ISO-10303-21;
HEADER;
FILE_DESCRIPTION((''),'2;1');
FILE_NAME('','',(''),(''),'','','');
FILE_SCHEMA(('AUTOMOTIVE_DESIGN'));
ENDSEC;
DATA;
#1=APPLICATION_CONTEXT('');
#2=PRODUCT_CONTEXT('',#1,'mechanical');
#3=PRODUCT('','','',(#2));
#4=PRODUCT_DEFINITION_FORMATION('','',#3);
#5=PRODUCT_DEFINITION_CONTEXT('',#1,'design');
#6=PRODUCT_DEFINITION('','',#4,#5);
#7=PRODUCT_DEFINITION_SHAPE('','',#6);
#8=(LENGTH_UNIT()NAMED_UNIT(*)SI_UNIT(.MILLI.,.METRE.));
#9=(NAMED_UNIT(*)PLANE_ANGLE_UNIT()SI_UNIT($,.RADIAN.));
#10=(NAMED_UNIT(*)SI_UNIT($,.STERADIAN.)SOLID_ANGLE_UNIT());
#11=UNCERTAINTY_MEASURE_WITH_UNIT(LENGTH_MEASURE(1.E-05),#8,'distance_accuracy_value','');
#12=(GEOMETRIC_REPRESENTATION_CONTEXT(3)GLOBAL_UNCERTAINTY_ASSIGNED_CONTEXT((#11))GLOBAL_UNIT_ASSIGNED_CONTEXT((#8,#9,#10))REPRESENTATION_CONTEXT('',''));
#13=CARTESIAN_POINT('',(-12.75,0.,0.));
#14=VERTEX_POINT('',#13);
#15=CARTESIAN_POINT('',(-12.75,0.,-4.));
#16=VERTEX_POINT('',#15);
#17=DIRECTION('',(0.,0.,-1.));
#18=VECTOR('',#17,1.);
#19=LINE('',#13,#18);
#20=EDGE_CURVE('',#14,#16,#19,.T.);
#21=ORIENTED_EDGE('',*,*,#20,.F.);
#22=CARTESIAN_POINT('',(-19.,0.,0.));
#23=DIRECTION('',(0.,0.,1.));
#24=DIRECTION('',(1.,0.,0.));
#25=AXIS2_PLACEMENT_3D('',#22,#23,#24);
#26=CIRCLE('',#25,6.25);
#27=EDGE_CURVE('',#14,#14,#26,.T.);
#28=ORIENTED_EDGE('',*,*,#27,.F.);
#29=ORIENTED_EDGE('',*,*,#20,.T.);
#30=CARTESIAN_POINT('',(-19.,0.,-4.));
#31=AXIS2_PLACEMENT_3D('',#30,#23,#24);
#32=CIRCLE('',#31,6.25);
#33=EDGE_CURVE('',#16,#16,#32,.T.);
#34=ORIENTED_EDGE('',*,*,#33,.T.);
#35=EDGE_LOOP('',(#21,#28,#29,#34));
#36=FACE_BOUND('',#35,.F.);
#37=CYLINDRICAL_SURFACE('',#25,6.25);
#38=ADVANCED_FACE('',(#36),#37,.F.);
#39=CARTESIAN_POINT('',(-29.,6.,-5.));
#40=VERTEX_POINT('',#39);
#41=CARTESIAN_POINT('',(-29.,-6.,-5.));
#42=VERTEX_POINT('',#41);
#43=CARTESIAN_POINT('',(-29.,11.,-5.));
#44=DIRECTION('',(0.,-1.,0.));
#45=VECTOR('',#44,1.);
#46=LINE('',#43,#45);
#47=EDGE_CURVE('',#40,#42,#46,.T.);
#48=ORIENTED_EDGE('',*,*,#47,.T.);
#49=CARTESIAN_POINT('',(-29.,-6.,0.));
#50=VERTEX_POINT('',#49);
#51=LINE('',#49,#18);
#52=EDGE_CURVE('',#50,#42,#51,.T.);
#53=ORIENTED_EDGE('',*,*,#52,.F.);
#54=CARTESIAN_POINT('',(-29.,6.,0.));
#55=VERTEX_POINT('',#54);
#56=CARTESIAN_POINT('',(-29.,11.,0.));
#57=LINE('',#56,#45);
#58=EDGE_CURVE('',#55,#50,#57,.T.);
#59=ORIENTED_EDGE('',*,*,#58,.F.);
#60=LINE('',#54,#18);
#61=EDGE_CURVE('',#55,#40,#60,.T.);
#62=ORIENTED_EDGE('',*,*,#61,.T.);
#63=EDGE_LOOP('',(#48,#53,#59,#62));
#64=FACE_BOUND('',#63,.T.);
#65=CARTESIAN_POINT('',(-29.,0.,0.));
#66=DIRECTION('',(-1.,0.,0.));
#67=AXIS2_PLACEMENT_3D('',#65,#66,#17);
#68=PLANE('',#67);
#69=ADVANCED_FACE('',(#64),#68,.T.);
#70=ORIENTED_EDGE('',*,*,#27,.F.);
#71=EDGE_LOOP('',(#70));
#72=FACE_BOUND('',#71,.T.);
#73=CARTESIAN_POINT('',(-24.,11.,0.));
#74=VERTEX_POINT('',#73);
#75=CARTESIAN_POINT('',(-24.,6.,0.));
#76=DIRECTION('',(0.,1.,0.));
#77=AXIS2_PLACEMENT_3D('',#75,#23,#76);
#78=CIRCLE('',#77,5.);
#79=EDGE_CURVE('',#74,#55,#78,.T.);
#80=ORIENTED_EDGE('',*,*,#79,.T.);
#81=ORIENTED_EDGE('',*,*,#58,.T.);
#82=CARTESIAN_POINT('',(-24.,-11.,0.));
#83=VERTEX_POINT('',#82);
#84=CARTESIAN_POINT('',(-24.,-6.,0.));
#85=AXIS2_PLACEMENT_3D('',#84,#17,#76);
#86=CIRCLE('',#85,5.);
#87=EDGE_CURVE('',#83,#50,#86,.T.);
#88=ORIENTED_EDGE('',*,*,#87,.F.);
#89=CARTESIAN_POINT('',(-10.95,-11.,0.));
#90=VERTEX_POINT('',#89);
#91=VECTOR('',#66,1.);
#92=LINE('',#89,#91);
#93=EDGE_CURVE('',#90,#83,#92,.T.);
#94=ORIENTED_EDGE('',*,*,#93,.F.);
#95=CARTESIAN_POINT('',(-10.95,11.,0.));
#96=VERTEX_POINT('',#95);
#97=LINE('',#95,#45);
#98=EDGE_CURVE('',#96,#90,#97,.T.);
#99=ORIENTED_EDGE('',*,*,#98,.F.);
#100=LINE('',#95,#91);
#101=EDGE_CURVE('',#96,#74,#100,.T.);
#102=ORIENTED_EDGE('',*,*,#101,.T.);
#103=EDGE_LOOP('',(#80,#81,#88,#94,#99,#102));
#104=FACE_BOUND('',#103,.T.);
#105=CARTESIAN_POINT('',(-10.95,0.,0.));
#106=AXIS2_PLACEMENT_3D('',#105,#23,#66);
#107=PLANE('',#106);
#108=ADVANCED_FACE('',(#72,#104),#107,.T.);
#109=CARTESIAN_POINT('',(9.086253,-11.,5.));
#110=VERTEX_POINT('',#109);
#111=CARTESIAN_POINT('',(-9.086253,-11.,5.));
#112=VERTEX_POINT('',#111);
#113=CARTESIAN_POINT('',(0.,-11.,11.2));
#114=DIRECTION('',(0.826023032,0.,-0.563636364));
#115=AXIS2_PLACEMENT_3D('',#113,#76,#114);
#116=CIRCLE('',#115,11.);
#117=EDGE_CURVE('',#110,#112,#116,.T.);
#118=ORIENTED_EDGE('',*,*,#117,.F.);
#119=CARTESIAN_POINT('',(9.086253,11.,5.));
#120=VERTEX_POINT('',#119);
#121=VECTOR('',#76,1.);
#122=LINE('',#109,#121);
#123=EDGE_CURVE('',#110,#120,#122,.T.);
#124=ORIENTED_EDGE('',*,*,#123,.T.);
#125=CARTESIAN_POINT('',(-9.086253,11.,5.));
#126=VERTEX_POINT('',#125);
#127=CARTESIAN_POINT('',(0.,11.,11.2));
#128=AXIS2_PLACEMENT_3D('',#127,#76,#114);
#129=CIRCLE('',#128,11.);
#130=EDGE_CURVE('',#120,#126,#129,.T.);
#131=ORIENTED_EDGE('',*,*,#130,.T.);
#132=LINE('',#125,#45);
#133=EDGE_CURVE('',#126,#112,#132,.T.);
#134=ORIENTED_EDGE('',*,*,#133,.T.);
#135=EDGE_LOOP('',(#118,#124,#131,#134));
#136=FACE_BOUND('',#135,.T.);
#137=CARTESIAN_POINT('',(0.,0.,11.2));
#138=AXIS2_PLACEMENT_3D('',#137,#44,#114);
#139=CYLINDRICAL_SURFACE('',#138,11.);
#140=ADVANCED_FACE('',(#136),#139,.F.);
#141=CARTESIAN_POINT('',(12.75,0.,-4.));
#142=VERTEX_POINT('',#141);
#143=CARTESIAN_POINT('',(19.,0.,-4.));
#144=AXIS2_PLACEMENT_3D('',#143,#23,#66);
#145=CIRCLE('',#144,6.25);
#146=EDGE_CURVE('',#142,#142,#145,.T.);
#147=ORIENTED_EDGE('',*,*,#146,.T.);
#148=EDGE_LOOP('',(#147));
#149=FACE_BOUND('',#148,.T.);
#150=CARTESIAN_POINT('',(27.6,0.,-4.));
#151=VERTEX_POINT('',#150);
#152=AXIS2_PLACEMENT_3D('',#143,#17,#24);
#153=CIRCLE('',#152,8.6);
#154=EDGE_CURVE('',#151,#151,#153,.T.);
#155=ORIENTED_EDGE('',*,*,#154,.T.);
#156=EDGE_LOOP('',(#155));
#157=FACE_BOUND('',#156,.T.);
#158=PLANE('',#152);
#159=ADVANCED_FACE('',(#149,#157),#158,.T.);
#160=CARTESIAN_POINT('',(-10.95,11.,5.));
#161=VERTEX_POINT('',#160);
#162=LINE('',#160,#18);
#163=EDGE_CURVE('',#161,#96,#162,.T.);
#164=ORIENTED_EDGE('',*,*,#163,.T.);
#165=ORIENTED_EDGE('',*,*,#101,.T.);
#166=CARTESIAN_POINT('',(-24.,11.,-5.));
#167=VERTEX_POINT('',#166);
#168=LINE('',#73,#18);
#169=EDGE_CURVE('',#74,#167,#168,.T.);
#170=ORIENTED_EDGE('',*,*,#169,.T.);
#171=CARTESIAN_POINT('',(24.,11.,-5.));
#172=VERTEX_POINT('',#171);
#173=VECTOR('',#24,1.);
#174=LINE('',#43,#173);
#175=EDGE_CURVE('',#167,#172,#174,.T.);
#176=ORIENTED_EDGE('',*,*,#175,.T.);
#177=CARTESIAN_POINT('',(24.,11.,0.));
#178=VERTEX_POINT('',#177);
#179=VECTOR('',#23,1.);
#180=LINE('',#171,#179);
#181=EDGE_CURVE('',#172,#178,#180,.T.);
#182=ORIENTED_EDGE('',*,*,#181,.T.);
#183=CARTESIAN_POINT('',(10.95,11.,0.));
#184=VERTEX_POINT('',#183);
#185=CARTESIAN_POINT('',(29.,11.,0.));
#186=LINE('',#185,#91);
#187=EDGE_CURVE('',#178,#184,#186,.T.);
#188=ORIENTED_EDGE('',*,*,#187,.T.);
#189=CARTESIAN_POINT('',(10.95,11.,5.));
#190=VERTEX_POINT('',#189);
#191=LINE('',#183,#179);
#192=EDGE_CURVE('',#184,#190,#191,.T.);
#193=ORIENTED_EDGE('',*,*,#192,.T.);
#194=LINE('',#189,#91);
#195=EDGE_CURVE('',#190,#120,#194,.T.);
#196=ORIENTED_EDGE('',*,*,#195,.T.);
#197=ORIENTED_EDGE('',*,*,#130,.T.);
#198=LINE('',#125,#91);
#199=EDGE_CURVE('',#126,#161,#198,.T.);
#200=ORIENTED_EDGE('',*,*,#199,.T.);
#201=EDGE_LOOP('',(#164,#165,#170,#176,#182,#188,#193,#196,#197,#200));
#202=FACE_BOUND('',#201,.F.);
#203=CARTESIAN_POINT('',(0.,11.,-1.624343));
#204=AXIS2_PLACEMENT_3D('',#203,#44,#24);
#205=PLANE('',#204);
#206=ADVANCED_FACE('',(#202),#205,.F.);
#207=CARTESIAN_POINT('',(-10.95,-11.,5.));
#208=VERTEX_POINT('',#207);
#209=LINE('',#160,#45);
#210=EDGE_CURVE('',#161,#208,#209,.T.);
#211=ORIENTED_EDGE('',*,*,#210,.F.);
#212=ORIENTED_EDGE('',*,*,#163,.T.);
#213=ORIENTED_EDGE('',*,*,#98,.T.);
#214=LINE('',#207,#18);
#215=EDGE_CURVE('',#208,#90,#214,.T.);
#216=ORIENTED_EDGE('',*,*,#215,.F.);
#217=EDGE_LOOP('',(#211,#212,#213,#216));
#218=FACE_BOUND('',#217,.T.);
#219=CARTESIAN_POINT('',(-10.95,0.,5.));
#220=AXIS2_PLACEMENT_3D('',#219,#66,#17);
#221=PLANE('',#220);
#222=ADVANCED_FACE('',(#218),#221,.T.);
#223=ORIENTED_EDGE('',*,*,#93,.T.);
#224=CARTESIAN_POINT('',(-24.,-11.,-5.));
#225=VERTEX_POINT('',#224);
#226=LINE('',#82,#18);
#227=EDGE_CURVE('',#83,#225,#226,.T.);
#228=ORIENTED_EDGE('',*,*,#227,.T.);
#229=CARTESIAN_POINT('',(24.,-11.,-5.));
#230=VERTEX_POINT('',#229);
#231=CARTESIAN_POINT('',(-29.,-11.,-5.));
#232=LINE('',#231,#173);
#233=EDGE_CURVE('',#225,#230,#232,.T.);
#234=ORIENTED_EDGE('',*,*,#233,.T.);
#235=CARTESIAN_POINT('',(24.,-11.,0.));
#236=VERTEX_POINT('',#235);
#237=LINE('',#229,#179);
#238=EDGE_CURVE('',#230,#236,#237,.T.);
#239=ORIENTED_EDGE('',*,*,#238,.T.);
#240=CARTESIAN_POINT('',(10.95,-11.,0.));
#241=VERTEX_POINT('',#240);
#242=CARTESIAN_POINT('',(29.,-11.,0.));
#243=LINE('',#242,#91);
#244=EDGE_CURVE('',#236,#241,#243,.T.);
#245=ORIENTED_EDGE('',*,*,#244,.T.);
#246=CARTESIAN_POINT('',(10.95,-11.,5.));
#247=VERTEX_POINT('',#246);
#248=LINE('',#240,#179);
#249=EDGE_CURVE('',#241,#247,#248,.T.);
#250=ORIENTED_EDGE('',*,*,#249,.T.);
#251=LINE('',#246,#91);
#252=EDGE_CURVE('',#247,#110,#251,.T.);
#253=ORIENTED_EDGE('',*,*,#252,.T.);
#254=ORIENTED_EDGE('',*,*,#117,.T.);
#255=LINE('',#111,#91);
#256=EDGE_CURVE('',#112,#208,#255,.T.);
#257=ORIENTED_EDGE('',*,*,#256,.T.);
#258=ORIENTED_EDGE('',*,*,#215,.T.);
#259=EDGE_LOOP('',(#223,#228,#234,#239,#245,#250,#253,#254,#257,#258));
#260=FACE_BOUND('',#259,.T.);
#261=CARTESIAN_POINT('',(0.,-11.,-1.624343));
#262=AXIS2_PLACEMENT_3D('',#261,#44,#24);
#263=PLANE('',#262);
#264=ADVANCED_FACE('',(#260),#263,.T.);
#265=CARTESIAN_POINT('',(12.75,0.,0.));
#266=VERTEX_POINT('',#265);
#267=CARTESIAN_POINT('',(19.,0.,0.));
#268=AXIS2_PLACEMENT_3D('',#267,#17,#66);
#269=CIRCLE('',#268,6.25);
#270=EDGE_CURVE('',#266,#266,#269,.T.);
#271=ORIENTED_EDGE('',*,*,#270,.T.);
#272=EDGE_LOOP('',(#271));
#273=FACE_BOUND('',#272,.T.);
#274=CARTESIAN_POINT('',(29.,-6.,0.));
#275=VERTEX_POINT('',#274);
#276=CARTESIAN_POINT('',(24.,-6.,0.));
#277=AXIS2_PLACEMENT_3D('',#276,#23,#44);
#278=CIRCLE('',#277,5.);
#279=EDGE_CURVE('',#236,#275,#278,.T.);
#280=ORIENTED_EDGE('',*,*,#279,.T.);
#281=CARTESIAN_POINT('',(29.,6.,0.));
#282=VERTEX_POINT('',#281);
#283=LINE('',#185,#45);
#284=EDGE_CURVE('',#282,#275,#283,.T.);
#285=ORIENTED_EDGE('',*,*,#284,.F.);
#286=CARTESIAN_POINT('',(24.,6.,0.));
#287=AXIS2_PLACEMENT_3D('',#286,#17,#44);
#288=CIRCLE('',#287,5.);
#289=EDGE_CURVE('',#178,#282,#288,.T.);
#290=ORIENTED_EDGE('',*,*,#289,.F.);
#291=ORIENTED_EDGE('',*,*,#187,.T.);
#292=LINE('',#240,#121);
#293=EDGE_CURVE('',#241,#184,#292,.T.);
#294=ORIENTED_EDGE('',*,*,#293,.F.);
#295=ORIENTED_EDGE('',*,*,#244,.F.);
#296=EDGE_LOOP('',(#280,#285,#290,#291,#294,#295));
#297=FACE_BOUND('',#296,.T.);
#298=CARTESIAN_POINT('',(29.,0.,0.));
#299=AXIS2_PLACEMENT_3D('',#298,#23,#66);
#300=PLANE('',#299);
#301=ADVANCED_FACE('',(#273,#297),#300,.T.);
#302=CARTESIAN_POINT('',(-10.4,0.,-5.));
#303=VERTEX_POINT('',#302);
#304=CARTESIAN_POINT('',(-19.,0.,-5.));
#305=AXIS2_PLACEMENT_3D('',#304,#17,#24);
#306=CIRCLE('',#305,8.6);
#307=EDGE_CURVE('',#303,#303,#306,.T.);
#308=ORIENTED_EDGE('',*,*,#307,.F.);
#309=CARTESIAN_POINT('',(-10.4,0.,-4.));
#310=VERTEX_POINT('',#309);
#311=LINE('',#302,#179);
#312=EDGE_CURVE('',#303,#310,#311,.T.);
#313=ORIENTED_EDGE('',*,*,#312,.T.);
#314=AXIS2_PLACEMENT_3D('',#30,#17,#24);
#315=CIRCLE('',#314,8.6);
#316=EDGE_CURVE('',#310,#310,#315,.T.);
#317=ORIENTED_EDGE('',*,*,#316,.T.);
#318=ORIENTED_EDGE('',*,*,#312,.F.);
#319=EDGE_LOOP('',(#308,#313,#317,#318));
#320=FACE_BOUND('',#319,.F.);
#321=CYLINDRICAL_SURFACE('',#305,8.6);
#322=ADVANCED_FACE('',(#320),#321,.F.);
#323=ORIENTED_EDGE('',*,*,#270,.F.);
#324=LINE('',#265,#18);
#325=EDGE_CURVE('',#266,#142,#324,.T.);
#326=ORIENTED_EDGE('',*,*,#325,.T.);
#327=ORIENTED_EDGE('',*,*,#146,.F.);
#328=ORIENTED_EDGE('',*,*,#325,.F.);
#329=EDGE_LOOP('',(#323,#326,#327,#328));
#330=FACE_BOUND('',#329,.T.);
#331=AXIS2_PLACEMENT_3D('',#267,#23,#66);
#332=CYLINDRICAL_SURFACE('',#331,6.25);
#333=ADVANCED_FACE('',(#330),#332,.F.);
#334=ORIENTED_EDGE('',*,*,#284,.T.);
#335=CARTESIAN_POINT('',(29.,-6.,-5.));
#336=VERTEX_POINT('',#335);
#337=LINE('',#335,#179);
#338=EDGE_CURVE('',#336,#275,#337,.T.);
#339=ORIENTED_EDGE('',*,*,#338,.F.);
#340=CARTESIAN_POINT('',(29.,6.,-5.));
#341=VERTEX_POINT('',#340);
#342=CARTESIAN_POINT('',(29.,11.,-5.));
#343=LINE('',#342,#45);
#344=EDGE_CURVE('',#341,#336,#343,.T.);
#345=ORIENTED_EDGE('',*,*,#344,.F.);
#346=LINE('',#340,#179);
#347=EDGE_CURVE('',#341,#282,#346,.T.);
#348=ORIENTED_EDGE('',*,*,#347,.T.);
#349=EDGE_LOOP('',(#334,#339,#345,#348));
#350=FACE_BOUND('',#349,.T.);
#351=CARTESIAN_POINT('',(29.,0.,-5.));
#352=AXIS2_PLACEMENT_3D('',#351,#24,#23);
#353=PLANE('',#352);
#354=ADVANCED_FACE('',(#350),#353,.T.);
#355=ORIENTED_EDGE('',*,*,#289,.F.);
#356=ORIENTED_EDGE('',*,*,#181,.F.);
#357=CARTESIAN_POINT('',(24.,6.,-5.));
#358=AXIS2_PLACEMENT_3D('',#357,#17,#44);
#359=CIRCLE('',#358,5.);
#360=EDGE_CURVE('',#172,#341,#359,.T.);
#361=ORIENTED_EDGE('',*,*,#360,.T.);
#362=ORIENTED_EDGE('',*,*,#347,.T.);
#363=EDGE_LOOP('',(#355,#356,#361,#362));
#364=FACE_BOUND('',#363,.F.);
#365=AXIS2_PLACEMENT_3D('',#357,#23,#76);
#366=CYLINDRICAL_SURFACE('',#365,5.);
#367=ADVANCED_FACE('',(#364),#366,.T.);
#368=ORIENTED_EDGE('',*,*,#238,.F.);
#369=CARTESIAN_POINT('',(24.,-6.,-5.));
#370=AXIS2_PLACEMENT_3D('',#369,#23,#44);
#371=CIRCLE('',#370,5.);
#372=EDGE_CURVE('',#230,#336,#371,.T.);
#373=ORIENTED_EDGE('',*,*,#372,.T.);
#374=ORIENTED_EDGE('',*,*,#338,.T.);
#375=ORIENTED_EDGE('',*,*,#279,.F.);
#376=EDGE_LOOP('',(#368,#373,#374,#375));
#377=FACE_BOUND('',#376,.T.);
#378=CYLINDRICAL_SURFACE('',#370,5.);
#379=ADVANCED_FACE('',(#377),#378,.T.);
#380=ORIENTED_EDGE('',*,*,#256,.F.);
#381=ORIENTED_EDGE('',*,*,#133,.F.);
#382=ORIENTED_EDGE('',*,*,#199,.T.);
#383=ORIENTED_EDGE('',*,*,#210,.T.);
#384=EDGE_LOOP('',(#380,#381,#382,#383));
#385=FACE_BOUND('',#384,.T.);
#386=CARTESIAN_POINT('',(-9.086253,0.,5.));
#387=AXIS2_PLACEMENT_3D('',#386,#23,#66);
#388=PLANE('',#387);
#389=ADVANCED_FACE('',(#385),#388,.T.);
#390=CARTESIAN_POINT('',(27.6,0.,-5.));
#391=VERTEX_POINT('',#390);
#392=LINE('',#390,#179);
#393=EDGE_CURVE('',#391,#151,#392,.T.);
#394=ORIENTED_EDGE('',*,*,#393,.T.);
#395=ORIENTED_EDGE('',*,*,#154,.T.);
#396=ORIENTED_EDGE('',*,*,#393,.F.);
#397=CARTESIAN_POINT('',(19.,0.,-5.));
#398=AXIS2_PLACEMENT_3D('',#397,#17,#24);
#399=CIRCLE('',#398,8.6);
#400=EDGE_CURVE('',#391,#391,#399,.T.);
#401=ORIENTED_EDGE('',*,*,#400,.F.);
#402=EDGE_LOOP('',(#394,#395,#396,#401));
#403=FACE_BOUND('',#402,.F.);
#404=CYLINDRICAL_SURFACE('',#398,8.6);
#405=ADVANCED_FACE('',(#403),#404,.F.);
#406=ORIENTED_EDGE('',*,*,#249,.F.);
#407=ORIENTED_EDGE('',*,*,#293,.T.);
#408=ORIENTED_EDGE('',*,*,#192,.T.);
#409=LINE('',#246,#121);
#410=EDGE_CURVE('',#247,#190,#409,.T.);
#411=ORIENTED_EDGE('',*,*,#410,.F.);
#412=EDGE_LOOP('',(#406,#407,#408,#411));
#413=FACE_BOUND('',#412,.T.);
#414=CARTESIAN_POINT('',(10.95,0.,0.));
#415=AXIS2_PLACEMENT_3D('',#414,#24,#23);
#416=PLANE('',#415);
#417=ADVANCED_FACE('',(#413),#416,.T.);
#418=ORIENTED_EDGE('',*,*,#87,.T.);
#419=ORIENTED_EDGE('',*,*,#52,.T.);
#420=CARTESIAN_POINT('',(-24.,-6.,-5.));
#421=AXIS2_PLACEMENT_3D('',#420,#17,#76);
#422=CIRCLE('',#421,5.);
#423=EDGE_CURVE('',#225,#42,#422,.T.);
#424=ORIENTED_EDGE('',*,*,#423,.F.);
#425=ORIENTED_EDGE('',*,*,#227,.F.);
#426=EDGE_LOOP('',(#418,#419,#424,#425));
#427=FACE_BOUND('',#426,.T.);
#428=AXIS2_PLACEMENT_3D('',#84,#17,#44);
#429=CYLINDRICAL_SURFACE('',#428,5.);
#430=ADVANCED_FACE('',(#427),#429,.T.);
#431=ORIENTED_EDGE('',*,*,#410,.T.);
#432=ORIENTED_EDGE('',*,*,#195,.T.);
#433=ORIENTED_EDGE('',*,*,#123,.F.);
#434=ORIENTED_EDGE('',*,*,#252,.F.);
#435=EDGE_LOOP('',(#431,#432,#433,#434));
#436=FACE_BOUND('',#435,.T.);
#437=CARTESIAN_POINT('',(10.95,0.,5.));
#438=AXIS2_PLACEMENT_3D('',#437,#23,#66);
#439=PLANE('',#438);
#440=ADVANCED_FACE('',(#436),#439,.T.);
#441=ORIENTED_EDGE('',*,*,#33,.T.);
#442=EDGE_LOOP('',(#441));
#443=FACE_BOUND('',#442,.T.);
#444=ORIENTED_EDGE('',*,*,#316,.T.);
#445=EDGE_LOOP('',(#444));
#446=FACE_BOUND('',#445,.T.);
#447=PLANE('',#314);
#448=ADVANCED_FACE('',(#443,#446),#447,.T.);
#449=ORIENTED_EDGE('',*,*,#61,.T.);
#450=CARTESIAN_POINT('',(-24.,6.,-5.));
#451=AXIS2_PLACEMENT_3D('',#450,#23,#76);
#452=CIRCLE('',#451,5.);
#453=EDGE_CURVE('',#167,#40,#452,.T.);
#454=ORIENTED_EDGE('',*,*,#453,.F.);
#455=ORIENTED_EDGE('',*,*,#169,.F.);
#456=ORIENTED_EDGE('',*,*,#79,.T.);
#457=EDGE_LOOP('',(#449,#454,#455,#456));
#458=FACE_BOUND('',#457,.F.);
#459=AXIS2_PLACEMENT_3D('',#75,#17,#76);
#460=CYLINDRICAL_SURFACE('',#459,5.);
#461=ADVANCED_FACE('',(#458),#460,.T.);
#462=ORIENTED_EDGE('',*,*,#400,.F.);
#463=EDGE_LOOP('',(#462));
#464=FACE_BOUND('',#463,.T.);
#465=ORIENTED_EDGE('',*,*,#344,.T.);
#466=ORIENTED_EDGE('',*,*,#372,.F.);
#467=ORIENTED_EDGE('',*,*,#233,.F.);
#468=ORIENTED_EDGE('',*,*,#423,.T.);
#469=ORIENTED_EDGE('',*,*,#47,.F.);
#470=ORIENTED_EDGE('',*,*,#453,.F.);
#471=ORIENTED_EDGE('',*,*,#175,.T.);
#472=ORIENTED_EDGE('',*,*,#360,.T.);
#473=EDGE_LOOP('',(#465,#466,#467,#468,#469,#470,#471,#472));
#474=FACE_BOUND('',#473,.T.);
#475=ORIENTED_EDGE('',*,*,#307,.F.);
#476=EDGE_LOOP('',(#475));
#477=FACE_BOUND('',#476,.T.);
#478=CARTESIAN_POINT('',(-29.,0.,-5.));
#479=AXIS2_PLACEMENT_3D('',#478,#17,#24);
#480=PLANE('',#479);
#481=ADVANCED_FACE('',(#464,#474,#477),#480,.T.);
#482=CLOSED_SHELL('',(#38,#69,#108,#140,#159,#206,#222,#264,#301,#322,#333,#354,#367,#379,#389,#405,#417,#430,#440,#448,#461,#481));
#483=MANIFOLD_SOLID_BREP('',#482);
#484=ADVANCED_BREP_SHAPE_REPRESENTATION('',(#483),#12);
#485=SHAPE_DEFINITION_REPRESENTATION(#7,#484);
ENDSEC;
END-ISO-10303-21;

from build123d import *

# Parameters (mm, degrees)
F2_DEPTH = 11
F3_R     = 6.25
F4_DEPTH = 5.001
F5_R     = 5
F6_R     = 8.6
F7_DEPTH = 1


# Not quite as in the source:
# - a pattern or mirror of a feature is missing from the dataset's text; its kind, count and spacing are read off the source's solid


with BuildPart() as f2:
    # F1 (on Front) → F2 (new body, symmetric)
    with BuildSketch(Plane.XZ):
        with BuildLine():
            ThreePointArc((9.0862533533, 5), (0, 0.2), (-9.0862533533, 5))
            Line((-9.0862533533, 5), (-10.95, 5))
            Line((-10.95, 5), (-10.95, 0))
            Line((-10.95, 0), (-29, 0))
            Line((-29, 0), (-29, -5))
            Line((-29, -5), (29, -5))
            Line((29, -5), (29, 0))
            Line((29, 0), (10.95, 0))
            Line((10.95, 0), (10.95, 5))
            Line((10.95, 5), (9.0862533533, 5))
        make_face()
    extrude(amount=F2_DEPTH, both=True)

    # F3 (on Top) → F4 (cut, through all)
    with BuildSketch(Plane.XY):
        with Locations((-19, 0)):
            Circle(F3_R)
    f4 = extrude(amount=-F4_DEPTH, mode=Mode.SUBTRACT)

    # F4_copies: F4 across plane
    add(f4.mirror(Plane(origin=(0, 0, 0), x_dir=(0, 0, 1), z_dir=(1, 0, 0))), mode=Mode.SUBTRACT)

    # F5
    f5_edges = [f2.edges().sort_by_distance(p)[0] for p in [
        (-29, -11, -2.5),
        (-29, 11, -2.5),
        (29, -11, -2.5),
        (29, 11, -2.5),
    ]]
    fillet(f5_edges, radius=F5_R)

    # F6 (on face) → F7 (cut)
    with BuildSketch(Plane(origin=(0, 0, -5), x_dir=(1, 0, 0), z_dir=(0, 0, -1))):
        with Locations((-19, 0)):
            Circle(F6_R)
        with Locations((19, 0)):
            Circle(F6_R)
    extrude(amount=-F7_DEPTH, mode=Mode.SUBTRACT)


solid = f2.part
